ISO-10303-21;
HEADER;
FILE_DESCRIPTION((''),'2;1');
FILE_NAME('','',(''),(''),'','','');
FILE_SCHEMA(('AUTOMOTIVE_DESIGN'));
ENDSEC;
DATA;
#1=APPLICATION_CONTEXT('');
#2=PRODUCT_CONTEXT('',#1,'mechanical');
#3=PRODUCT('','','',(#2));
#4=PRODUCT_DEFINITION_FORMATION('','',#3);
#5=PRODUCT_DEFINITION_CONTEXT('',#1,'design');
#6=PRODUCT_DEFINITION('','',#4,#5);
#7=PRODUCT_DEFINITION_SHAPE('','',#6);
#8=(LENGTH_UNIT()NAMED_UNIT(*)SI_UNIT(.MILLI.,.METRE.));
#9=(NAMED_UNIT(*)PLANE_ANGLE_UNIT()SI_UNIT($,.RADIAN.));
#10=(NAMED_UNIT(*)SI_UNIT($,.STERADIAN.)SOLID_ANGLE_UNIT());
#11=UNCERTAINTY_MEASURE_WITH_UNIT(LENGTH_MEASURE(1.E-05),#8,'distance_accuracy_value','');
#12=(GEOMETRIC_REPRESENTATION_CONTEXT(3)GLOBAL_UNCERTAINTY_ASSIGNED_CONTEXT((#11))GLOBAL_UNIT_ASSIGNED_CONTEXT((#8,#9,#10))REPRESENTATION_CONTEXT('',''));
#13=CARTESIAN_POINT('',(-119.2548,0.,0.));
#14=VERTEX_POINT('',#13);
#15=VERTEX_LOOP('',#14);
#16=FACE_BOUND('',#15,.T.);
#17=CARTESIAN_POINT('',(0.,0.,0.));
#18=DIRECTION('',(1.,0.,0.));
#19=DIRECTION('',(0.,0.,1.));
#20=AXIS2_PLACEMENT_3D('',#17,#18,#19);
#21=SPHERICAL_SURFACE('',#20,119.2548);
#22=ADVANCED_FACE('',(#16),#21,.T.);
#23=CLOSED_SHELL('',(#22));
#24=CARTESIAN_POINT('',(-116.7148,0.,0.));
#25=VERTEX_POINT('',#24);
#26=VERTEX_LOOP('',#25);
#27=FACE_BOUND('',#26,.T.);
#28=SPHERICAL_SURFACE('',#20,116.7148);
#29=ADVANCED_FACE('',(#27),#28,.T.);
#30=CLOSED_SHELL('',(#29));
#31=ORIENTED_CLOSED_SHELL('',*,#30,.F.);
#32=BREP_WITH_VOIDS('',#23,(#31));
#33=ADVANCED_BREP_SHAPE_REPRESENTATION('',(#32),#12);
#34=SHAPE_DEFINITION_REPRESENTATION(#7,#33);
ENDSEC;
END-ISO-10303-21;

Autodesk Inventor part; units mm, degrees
ref_plane "YZ Plane" through (0, 0, 0) normal (1, 0, 0) x (0, 1, 0)
ref_plane "XZ Plane" through (0, 0, 0) normal (0, 1, 0) x (-1, 0, 0)
ref_plane "XY Plane" through (0, 0, 0) normal (0, 0, 1) x (1, 0, 0)
sketch "Sketch1" plane through (0, 0, 0) normal (0, 1, 0) x (-1, 0, 0)
  circle A0 centre (0, 0) radius 119.2548
  line L0 (119.2548, 0) -> (-119.2548, 0)
  dimension "d0" = 238.5096
revolve "Revolution1" add sketch "Sketch1" angle 360 about axis through (-119.2548, 0, 0) along (1, 0, 0) picked at (27.435, 51.7312) contours L0 A0
shell "Shell1" thickness 2.54 removed faces 0
properties part number "Basketball" material "Rubber"
